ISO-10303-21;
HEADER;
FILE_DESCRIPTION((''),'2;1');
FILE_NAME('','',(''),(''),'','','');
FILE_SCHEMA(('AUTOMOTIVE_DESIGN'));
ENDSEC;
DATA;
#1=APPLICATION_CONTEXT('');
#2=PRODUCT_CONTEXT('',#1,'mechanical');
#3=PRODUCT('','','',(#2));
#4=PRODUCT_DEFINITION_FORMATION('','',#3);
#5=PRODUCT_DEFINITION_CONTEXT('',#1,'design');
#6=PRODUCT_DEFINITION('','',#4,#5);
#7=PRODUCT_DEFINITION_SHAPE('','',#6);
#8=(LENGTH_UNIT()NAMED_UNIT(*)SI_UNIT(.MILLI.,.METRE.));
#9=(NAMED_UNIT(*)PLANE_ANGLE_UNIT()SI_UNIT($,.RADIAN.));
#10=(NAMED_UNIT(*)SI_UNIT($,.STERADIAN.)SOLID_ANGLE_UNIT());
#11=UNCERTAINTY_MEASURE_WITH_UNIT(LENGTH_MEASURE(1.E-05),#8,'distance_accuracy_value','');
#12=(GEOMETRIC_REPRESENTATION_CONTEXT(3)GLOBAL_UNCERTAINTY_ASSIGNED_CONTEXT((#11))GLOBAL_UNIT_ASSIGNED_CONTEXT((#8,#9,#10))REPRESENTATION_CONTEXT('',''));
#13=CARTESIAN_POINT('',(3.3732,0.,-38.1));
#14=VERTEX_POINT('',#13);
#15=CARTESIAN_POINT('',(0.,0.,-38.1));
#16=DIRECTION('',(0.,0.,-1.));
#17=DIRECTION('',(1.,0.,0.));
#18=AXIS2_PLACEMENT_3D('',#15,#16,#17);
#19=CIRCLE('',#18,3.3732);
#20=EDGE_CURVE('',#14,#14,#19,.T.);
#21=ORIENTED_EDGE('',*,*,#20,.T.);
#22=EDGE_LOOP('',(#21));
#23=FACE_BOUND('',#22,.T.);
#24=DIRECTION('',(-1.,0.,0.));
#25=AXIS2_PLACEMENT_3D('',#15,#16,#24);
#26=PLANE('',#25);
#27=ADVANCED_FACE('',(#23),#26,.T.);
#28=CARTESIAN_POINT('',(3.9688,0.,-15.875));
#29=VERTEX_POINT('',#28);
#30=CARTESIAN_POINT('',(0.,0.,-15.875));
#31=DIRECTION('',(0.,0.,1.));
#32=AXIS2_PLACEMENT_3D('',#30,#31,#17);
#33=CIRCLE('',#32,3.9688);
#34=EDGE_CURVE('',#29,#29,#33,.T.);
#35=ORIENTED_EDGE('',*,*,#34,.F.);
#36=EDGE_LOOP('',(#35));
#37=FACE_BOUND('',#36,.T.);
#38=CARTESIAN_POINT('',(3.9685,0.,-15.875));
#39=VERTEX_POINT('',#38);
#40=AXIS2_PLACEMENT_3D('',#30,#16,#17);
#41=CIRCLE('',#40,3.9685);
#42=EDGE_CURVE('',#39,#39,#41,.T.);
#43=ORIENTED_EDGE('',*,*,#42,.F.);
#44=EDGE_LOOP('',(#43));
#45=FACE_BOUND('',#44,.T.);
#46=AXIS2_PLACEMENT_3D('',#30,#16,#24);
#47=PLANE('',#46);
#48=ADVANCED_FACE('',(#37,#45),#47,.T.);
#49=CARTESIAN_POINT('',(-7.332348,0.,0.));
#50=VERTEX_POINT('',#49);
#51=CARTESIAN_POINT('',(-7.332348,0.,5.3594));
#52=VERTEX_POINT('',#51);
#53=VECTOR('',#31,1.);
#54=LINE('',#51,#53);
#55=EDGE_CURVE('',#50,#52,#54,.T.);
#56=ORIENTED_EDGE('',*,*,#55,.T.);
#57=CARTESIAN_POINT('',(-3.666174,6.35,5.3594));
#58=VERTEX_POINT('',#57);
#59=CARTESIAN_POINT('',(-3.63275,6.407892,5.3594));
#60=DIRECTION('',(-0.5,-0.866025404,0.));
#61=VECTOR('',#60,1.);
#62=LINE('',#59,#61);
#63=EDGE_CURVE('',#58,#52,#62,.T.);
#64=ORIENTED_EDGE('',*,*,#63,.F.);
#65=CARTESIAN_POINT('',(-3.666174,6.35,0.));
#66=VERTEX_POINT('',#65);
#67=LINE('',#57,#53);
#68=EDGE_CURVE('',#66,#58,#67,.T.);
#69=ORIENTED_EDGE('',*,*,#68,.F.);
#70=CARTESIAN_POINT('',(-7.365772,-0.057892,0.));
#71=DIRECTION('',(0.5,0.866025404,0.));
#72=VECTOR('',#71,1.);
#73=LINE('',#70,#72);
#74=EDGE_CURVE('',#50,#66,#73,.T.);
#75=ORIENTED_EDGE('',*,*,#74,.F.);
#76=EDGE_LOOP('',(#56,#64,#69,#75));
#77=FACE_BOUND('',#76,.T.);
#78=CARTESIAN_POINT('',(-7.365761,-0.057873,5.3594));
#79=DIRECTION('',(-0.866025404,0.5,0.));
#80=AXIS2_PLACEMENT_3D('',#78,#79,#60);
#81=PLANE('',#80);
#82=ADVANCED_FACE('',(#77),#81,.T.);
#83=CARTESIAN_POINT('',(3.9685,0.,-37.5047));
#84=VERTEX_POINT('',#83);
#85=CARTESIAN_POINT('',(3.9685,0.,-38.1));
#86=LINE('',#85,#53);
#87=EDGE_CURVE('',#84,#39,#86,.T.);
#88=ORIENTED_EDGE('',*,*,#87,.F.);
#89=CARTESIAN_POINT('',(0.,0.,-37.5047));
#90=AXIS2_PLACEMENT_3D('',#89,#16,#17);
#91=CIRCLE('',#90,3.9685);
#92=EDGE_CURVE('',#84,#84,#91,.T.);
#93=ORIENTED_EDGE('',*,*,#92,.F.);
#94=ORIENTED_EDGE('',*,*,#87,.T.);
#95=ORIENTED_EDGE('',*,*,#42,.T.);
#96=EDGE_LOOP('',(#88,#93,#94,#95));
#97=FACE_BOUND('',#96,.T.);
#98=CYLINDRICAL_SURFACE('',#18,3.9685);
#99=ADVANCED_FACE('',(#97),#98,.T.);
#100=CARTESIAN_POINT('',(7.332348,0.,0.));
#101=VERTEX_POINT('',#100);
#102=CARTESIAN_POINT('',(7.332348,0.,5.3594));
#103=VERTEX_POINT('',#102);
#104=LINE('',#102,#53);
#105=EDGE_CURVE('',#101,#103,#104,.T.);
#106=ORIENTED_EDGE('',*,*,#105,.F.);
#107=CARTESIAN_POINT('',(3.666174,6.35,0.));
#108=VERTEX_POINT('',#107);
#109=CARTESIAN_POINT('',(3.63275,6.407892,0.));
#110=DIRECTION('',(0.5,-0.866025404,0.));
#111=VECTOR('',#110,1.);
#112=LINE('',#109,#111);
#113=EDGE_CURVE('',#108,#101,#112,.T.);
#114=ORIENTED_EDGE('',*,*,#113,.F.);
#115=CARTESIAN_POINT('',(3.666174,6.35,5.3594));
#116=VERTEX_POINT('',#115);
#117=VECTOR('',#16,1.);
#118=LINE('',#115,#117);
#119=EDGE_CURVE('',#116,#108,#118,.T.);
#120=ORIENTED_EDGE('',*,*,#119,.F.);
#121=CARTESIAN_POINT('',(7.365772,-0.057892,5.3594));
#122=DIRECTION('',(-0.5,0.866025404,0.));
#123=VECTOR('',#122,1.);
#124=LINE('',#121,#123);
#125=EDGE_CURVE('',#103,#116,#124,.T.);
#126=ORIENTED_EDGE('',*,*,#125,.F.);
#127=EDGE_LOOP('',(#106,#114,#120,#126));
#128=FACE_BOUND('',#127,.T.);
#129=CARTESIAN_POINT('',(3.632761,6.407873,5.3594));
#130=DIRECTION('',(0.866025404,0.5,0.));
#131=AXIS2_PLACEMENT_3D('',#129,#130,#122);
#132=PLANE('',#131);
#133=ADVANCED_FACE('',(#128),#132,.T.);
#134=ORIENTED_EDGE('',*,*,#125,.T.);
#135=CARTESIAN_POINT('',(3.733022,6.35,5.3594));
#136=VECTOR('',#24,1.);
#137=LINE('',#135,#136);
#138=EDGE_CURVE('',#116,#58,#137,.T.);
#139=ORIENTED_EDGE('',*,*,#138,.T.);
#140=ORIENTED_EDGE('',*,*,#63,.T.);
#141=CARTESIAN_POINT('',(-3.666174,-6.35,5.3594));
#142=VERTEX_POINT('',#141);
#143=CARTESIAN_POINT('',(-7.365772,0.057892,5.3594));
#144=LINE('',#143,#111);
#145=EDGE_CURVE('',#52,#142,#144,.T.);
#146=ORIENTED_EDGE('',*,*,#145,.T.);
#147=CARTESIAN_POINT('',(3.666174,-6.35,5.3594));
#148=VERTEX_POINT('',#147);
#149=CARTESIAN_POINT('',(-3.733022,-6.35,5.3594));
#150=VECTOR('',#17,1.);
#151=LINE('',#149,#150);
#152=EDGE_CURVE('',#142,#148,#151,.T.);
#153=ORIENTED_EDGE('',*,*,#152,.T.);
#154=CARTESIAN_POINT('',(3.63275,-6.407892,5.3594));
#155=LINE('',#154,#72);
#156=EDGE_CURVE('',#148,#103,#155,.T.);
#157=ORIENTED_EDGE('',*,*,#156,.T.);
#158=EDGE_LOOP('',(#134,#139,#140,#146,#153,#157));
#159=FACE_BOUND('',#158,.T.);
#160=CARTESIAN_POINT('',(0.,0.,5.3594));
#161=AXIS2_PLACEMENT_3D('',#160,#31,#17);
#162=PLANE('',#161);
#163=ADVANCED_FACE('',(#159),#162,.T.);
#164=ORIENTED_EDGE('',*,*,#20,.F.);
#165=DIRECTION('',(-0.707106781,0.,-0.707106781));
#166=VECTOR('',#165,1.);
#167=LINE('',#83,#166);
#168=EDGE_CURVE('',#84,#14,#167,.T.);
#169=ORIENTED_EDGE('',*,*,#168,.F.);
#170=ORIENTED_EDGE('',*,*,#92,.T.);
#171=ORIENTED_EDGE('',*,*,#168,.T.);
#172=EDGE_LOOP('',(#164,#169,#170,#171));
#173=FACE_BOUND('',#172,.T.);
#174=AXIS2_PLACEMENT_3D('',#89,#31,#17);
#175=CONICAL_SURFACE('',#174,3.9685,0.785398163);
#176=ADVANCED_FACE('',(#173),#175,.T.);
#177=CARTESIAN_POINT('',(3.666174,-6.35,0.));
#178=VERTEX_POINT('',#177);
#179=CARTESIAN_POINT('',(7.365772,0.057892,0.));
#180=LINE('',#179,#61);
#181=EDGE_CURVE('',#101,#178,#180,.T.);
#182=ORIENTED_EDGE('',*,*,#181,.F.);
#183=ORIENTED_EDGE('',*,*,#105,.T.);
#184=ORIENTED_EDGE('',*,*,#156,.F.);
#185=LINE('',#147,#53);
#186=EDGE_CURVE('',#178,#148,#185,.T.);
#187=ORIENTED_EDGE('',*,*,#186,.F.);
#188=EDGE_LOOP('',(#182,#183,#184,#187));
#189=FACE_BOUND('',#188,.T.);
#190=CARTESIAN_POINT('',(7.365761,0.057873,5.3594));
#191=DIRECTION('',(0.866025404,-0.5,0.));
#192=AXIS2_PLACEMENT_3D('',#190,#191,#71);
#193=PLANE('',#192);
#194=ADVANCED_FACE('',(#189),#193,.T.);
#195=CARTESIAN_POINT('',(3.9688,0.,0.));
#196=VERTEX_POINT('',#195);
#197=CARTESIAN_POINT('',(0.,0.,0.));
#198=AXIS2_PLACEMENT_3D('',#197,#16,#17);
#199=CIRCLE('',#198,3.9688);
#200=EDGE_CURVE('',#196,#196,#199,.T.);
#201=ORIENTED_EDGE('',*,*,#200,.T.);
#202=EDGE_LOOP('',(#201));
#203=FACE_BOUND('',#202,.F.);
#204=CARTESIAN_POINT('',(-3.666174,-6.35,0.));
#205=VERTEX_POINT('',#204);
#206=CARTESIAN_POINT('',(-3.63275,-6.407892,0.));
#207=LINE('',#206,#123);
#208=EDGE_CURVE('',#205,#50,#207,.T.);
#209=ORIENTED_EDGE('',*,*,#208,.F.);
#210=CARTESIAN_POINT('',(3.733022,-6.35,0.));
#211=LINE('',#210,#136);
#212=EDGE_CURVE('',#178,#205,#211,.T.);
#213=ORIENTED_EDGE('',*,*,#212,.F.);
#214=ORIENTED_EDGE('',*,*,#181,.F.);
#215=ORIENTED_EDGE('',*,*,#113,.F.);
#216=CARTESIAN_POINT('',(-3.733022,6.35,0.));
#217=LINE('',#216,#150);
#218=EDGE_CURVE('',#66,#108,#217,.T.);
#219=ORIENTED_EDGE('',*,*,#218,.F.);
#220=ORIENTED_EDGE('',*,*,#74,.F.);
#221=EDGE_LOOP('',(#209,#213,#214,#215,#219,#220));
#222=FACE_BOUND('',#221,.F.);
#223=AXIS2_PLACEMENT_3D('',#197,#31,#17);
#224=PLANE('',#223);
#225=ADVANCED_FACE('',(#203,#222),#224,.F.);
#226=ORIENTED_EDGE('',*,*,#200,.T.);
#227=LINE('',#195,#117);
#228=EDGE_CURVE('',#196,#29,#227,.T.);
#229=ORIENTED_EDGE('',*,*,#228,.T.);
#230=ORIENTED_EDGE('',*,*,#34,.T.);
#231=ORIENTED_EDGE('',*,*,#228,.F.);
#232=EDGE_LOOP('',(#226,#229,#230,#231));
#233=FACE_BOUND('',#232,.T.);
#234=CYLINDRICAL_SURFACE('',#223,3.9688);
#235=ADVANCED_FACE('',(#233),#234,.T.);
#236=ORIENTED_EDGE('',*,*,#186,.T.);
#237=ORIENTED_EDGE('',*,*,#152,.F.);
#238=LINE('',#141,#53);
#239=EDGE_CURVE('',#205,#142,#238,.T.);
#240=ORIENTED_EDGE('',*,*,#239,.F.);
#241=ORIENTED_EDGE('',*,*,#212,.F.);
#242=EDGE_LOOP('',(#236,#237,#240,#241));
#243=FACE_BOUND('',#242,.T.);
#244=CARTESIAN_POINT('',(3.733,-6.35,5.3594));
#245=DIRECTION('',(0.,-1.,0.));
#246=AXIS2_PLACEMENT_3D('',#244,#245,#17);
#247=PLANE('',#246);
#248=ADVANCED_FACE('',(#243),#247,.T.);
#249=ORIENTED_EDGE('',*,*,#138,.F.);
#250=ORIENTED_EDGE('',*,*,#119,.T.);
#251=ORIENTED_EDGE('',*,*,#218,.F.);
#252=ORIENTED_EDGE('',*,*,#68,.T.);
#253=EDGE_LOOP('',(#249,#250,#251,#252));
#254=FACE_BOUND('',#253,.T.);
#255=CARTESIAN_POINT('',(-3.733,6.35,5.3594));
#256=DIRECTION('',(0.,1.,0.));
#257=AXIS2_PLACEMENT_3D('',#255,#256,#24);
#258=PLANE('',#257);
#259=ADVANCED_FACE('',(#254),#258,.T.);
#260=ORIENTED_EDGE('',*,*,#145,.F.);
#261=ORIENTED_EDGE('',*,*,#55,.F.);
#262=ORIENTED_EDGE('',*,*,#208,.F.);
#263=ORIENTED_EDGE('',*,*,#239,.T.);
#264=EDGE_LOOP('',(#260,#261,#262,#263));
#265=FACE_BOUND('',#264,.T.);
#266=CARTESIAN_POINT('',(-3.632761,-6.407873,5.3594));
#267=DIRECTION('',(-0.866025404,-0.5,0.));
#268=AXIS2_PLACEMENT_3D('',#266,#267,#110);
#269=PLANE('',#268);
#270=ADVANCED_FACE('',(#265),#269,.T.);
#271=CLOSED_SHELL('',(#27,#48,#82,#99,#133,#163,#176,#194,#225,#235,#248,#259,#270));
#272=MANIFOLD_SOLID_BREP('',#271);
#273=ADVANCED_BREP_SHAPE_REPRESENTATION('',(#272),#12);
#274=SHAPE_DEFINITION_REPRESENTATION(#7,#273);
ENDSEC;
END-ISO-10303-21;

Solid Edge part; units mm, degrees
sketch "Sketch1" plane through (0, 0, 0) normal (0, 0, 1) x (1, 0, 0)
  circle A0 centre (0, 0) radius 7.366
  dimension "D1" = 14.732
extrude "Protrusion1" add sketch "Sketch1" along normal blind 5.3594
sketch "Sketch2" plane through (0, 0, 0) normal (0, 0, -1) x (1, 0, 0)
  circle A0 centre (0, 0) radius 3.9688
extrude "Protrusion2" add sketch "Sketch2" along normal blind 38.1
sketch "Sketch3" plane through (0, 0, -38.1) normal (0, 0, -1) x (1, 0, 0)
  circle A0 centre (0, 0) radius 3.9685
extrude "Cutout1" cut sketch "Sketch3" against normal blind 22.225 flip side to cut
chamfer "Chamfer_1" distance 0.5953 angle 45 1 edges at (-3.9685, 0, -38.1)
sketch "Sketch4" plane through (0, 0, 5.3594) normal (0, 0, 1) x (1, 0, 0)
  line L0 (-3.733, 6.35) -> (3.733, 6.35)
  dimension "D1" = 12.7
extrude "Cutout2" cut sketch "Sketch4" against normal up to next material side at (0, 6.4, 5.3594)
pattern_circular "Pattern1" count 6 over 360 about axis through (0, 0, 5.3594) along (0, 0, 1) of "Cutout2"
properties part number "24100009"
